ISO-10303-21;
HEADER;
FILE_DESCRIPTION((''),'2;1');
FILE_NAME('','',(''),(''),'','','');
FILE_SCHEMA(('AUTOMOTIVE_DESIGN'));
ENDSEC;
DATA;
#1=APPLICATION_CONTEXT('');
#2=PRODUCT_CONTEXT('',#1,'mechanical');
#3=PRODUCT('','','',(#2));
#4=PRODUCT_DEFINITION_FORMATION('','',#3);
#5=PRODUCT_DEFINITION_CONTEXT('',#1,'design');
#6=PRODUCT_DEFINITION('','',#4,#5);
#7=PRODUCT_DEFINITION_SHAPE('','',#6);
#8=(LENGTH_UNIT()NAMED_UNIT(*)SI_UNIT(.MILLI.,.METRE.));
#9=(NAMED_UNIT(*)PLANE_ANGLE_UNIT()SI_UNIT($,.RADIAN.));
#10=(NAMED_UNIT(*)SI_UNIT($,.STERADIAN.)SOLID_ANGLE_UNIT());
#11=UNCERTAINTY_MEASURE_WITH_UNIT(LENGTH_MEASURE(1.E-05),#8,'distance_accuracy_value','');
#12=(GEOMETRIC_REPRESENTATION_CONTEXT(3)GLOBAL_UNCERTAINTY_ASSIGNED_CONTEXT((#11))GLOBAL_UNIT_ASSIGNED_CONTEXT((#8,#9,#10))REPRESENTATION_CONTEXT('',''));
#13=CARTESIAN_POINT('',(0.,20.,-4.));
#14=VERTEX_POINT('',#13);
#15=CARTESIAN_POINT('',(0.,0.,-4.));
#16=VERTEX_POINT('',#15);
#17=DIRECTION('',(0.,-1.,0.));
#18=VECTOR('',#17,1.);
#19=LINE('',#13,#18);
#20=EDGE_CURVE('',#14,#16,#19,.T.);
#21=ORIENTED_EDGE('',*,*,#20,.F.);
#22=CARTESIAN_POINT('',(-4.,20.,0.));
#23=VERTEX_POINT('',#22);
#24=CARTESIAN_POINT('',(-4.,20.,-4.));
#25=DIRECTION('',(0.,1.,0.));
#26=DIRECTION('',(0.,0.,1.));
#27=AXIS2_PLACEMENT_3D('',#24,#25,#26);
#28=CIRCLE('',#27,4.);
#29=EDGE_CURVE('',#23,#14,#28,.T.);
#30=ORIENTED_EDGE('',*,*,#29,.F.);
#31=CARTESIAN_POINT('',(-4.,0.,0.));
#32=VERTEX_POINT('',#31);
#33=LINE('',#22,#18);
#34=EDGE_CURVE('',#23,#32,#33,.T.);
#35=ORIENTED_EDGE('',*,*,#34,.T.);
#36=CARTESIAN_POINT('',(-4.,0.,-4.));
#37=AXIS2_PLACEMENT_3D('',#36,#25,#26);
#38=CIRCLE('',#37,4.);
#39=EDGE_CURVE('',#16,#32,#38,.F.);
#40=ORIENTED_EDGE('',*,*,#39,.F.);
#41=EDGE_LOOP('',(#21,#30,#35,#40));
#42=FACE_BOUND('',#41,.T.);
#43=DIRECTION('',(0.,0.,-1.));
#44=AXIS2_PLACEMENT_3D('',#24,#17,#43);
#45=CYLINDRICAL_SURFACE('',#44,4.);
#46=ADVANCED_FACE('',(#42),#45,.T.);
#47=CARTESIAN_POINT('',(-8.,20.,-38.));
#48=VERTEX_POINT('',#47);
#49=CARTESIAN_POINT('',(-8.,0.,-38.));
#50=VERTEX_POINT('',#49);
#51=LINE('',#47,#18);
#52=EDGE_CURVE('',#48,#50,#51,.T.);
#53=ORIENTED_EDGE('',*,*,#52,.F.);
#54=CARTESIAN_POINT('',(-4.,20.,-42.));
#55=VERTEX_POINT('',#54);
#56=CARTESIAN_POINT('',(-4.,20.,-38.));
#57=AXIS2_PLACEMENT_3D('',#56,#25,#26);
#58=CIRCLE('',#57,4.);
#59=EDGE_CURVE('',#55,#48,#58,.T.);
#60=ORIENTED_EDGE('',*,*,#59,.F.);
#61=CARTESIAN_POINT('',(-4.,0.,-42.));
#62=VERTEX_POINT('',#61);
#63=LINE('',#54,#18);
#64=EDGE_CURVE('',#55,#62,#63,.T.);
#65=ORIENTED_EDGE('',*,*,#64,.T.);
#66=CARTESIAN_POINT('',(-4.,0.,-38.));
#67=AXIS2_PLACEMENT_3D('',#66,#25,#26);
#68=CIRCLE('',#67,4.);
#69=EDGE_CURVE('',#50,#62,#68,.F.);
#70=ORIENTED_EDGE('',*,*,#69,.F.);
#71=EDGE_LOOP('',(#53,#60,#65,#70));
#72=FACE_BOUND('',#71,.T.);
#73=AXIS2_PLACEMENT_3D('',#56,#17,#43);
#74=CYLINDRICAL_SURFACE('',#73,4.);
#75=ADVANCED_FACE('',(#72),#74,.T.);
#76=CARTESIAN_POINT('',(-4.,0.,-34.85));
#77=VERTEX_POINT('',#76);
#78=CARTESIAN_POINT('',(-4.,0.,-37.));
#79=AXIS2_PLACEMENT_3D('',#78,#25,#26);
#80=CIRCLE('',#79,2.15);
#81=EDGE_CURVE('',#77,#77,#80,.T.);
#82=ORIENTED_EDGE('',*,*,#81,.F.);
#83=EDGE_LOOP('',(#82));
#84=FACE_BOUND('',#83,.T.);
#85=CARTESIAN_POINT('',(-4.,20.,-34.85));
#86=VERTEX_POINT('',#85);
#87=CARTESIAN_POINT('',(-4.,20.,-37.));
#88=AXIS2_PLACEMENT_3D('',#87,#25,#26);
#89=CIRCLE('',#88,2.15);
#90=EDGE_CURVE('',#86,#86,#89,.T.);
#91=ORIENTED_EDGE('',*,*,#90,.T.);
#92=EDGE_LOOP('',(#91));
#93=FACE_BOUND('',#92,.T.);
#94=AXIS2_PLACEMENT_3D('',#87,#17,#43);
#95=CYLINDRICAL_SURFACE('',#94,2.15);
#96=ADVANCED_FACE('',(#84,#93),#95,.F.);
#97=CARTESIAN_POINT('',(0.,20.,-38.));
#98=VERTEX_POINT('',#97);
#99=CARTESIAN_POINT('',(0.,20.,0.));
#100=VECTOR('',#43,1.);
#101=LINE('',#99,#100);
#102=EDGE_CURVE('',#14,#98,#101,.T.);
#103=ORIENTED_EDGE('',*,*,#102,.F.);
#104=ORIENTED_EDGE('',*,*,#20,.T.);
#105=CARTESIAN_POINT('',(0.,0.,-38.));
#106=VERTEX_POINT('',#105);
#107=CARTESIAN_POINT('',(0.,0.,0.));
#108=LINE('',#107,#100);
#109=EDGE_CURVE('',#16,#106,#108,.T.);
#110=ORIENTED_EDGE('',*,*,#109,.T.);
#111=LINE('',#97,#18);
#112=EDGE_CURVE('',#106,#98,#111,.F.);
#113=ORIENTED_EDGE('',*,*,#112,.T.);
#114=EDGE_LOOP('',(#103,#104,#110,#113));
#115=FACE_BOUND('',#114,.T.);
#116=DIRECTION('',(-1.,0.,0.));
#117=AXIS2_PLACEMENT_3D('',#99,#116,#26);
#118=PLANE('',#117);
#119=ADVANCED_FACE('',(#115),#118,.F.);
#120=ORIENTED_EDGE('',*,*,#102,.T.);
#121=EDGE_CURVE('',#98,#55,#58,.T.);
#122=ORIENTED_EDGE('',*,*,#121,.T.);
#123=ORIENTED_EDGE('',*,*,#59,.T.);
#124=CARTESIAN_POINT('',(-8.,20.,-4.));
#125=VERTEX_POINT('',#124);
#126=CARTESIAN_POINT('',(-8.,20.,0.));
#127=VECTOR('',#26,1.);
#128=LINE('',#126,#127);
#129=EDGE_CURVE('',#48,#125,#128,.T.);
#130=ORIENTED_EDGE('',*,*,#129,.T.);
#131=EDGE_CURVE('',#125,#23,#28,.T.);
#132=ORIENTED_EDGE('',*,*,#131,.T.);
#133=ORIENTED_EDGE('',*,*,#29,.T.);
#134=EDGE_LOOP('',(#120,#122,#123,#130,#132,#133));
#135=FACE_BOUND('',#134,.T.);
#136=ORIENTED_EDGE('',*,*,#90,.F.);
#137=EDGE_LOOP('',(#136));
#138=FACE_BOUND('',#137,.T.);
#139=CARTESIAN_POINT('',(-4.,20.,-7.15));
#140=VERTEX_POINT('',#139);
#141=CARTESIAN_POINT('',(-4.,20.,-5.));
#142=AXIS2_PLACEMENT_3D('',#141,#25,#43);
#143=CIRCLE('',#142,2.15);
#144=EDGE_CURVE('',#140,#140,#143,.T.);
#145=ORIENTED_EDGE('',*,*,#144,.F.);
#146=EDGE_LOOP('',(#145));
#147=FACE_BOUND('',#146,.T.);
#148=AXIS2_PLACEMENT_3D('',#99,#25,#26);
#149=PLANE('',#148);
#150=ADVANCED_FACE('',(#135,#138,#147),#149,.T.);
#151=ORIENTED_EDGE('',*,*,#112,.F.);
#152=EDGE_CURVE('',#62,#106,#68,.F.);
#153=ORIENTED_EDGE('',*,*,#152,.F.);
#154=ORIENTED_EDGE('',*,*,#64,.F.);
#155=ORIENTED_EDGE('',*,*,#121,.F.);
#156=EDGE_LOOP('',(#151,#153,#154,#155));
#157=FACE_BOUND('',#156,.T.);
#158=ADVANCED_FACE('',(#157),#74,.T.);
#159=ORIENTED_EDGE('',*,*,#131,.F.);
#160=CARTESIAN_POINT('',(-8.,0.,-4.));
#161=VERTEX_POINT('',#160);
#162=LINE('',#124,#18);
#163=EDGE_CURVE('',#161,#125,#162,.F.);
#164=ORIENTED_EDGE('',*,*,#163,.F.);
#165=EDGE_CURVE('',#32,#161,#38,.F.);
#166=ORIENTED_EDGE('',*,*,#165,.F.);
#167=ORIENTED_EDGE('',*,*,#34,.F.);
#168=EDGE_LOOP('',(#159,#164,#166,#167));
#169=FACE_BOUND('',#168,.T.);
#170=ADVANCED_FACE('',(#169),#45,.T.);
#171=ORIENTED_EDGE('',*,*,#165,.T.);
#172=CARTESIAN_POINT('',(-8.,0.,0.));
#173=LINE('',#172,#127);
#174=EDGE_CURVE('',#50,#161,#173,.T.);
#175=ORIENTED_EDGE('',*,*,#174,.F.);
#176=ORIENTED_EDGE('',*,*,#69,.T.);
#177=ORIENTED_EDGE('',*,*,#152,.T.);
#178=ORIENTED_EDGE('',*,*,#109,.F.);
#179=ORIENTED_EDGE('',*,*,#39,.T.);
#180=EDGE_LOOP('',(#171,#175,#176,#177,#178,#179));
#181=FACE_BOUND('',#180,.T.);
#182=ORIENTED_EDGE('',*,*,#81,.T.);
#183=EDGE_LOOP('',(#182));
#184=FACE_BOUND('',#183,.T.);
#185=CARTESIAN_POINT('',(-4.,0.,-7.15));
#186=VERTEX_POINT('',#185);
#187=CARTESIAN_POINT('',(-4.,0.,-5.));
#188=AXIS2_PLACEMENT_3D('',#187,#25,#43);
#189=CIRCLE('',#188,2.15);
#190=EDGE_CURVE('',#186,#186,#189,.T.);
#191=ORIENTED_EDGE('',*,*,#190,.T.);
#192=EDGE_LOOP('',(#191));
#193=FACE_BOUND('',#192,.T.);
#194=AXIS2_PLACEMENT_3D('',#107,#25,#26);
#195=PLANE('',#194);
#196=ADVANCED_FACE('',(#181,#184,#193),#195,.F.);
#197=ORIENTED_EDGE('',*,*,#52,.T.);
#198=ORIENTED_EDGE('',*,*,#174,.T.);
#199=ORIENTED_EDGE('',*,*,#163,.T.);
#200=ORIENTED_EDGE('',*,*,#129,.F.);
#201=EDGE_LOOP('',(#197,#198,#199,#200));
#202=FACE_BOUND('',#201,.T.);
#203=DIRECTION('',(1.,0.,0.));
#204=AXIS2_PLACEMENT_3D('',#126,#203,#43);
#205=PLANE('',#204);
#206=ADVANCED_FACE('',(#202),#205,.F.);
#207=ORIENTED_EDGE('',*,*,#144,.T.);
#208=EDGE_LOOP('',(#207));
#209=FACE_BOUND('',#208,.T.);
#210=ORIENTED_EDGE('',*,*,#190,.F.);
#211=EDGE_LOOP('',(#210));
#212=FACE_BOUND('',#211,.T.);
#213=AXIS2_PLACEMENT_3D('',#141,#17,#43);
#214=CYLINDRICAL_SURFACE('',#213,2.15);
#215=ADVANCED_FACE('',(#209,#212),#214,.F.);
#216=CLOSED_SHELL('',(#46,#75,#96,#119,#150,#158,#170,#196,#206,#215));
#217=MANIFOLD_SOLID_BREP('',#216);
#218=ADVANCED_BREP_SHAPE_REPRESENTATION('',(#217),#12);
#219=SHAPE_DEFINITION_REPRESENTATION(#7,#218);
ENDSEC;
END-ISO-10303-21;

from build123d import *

# Parameters (mm, degrees)
SKETCH1_W           = 8
SKETCH1_H           = 42
SKETCH1_R           = 2.15
BOSS_EXTRUDE1_DEPTH = 20
FILLET1_R           = 4


with BuildPart() as part:
    # Sketch1 → Boss-Extrude1 (new body)
    with BuildSketch(Plane(origin=(0, 0, 0), x_dir=(1, 0, 0), z_dir=(0, 1, 0))):
        with Locations((-4, 21)):
            Rectangle(SKETCH1_W, SKETCH1_H)
        with Locations(Location((-4, 37, 0), (0, 0, 270))):
            Circle(SKETCH1_R, mode=Mode.SUBTRACT)
        with Locations(Location((-4, 5, 0), (0, 0, 90))):
            Circle(SKETCH1_R, mode=Mode.SUBTRACT)
    extrude(amount=BOSS_EXTRUDE1_DEPTH)

    # Fillet1
    fillet1_edges = [part.edges().sort_by_distance(p)[0] for p in [
        (0, 10, 0),
        (-8, 10, -42),
        (0, 10, -42),
        (-8, 10, 0),
    ]]
    fillet(fillet1_edges, radius=FILLET1_R - 0.0001)  # a hair under: the kernel refuses the full size


solid = part.part
